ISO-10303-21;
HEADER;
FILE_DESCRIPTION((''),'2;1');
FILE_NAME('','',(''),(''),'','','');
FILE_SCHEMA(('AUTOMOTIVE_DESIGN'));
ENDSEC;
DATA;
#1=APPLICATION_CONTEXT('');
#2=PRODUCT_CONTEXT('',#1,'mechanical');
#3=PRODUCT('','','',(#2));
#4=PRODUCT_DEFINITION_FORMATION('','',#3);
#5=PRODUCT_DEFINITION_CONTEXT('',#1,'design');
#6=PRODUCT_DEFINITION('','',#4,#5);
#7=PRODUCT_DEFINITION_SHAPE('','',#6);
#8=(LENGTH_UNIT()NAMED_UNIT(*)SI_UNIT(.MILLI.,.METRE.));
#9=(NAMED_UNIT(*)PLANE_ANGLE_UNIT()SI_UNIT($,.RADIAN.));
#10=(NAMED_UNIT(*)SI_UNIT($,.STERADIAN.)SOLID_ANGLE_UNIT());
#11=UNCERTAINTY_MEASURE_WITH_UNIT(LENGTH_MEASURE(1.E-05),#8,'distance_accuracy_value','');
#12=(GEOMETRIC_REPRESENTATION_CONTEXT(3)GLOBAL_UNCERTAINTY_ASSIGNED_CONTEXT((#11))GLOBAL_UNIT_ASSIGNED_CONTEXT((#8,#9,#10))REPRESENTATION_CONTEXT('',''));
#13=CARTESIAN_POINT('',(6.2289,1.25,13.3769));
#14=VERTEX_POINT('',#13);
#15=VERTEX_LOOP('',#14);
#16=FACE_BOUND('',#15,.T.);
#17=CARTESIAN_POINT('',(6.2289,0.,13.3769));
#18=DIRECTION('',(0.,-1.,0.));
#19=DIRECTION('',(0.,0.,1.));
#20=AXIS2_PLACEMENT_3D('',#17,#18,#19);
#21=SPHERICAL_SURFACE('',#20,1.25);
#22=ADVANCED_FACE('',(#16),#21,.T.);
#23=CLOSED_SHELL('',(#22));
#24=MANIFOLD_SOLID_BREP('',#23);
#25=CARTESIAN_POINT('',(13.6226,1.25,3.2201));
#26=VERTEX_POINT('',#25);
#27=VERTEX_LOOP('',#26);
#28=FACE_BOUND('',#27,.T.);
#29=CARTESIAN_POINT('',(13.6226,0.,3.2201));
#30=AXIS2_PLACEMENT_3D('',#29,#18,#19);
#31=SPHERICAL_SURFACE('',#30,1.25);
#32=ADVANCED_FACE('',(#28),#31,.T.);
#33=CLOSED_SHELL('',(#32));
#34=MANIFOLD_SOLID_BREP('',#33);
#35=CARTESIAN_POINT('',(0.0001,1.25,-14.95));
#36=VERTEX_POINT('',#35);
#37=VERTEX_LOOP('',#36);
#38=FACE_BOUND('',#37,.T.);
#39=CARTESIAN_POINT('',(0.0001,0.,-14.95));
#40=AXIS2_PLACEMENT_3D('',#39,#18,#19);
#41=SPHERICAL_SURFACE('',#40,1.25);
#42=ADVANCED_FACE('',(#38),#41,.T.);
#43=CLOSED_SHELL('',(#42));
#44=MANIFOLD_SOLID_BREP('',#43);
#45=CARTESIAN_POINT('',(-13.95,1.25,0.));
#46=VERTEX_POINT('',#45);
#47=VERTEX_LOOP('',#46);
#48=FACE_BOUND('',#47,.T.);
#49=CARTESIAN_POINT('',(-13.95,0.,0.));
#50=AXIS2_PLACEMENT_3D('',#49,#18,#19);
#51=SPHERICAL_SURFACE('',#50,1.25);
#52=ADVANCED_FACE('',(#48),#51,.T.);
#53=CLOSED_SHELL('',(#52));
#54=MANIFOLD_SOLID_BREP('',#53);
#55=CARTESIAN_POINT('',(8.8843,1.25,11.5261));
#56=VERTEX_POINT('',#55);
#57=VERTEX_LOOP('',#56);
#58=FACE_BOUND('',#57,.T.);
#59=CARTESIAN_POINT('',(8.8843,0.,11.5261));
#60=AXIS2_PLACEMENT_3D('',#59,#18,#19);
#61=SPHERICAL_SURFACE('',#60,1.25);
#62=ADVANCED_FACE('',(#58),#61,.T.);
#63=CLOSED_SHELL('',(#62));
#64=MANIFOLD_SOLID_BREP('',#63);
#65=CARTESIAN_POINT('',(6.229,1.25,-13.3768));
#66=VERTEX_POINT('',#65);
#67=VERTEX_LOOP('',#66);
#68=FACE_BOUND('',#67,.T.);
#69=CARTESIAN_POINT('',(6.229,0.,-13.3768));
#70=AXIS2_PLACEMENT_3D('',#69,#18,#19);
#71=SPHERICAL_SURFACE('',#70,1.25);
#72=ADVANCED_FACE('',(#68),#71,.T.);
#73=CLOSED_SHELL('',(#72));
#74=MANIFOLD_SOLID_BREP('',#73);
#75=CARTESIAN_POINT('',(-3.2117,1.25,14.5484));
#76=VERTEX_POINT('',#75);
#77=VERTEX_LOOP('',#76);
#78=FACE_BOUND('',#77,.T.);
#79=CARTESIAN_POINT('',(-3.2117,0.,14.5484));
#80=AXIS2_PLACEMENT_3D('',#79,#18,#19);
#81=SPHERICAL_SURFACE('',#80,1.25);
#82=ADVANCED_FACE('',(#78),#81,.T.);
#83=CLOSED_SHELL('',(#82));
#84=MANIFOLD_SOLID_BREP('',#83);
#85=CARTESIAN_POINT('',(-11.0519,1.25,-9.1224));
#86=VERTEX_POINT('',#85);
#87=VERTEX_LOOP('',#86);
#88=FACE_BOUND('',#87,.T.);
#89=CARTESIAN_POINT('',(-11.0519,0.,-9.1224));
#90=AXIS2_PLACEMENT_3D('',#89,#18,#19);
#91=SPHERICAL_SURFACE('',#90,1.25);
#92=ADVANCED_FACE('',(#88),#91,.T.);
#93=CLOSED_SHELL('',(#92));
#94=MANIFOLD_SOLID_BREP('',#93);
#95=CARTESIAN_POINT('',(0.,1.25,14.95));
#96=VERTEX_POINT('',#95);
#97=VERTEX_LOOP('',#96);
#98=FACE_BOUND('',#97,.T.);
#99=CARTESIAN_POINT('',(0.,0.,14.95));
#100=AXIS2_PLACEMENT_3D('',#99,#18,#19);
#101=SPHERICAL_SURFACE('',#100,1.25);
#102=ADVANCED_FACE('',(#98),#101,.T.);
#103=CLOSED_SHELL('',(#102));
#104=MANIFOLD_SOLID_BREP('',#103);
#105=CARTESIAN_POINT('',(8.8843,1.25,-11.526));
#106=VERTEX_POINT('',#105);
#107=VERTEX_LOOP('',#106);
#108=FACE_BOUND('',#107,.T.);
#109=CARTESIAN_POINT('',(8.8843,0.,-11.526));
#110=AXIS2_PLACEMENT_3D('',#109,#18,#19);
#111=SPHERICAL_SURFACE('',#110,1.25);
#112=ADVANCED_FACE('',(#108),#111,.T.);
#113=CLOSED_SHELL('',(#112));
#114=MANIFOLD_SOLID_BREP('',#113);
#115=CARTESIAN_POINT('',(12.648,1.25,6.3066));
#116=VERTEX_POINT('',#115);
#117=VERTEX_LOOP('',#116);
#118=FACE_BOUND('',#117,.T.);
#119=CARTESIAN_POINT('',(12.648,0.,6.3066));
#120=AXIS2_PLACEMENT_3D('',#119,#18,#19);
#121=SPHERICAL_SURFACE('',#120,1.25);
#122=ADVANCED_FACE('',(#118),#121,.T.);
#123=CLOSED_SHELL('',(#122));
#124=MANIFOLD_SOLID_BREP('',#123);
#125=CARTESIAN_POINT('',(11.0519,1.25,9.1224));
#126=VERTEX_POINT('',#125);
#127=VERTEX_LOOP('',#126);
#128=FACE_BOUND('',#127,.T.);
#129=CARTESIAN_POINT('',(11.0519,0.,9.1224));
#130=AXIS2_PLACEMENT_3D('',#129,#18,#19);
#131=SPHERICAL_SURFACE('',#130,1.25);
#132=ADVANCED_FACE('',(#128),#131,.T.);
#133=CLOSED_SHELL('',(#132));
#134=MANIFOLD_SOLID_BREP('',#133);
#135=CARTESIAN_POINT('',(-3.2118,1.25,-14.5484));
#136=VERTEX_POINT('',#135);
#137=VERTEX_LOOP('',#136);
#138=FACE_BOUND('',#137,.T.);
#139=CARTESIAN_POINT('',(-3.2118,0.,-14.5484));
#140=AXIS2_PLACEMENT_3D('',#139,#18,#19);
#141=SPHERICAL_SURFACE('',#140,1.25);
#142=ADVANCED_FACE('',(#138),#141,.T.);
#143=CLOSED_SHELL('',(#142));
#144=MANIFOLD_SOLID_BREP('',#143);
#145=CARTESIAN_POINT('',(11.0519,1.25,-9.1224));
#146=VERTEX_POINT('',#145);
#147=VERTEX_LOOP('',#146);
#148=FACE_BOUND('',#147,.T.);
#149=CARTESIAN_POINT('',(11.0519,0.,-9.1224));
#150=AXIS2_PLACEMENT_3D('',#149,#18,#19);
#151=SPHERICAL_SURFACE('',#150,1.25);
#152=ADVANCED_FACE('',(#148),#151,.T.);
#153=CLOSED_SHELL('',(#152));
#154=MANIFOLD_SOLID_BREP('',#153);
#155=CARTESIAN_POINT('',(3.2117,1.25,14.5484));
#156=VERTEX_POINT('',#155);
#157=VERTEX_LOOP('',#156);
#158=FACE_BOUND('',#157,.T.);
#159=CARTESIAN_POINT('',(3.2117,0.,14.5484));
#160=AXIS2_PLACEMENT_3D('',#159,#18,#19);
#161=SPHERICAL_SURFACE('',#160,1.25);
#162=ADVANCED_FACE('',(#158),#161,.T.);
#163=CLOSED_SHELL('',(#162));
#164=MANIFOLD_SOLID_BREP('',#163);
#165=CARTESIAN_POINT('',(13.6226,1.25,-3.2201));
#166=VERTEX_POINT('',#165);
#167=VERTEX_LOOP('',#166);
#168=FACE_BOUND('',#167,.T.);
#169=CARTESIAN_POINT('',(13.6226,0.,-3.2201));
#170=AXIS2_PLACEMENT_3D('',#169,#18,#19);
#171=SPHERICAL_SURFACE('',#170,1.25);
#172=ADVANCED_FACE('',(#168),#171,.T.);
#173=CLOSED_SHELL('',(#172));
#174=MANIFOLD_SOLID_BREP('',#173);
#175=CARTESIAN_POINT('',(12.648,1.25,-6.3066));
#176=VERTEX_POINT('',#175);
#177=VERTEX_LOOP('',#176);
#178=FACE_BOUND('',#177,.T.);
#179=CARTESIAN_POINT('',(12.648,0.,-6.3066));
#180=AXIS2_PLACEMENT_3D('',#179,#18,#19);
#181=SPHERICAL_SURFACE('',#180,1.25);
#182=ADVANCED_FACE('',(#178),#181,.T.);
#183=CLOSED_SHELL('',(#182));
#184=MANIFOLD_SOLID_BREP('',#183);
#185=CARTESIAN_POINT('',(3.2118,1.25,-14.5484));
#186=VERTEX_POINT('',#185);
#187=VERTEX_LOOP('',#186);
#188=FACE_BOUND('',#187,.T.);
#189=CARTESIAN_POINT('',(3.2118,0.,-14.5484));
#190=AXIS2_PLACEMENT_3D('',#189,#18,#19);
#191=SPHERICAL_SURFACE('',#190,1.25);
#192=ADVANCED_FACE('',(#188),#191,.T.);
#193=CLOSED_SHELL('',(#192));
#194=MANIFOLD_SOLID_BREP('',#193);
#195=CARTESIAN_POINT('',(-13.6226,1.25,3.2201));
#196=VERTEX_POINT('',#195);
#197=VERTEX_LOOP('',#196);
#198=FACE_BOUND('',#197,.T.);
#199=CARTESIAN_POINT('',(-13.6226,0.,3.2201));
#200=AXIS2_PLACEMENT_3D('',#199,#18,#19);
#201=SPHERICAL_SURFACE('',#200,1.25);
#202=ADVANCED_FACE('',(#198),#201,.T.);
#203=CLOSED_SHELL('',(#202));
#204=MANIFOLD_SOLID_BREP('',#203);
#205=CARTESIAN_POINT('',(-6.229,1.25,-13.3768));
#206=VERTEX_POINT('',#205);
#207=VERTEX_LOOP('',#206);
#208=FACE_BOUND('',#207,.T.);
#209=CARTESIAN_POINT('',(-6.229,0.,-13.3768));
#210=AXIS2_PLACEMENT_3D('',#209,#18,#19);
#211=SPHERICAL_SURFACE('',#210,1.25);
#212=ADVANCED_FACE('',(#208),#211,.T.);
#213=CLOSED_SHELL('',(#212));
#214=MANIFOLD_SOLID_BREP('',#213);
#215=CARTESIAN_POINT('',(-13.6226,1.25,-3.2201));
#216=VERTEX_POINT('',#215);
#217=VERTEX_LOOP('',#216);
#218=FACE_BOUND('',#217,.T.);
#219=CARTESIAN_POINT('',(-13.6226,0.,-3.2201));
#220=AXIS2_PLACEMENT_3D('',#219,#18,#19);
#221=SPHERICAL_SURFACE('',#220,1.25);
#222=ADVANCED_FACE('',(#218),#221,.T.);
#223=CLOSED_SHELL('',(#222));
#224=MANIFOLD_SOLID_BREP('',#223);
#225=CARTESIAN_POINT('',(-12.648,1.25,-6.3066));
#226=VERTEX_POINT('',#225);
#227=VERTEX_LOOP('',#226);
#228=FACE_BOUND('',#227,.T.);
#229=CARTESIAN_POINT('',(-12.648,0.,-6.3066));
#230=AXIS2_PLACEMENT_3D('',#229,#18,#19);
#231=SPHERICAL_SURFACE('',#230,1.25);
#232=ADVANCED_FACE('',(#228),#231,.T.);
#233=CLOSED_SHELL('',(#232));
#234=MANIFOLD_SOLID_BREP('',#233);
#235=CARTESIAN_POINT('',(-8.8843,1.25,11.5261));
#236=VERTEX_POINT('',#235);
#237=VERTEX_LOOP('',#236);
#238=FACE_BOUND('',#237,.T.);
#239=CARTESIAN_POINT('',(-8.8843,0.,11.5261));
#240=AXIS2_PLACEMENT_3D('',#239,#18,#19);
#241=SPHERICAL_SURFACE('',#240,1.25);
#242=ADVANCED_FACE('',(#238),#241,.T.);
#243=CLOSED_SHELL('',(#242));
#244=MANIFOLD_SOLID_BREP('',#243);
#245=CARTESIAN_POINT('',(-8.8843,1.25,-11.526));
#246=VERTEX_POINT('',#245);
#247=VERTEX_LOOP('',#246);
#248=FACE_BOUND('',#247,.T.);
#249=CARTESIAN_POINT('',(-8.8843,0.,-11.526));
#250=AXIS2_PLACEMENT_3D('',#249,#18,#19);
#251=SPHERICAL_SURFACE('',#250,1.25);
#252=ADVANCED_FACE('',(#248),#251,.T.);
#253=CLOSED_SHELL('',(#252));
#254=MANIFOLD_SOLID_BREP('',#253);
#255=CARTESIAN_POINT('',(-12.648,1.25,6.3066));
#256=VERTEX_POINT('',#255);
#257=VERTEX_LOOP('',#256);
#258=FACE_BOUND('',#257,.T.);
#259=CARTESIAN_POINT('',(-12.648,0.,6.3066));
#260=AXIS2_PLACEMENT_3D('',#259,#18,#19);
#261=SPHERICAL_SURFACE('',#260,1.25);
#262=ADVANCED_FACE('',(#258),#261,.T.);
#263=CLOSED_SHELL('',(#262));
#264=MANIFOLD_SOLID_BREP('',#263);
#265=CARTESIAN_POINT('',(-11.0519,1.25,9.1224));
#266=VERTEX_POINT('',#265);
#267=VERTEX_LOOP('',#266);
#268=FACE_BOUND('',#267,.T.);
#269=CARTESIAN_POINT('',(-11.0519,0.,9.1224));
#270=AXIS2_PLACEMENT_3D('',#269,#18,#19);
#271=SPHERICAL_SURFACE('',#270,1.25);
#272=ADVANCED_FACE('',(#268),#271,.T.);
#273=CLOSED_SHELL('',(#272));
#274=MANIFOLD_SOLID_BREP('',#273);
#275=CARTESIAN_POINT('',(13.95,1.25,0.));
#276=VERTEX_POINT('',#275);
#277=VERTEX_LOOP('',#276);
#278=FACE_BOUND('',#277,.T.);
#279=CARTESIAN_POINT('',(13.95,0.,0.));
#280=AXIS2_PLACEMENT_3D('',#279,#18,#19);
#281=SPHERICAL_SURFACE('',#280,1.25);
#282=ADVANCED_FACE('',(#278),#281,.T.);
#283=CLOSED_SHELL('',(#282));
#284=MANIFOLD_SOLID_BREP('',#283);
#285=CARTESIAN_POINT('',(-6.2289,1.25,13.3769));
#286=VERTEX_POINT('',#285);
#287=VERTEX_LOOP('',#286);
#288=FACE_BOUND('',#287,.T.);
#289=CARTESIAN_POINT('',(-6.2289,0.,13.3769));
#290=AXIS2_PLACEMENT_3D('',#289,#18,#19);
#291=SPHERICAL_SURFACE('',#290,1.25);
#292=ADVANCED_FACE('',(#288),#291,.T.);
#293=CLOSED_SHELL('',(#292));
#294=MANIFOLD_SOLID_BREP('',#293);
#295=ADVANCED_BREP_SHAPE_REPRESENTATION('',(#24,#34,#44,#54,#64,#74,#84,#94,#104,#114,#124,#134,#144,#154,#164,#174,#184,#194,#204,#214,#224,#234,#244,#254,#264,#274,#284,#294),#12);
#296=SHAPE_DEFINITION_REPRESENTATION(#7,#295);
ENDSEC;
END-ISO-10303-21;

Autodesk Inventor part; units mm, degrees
ref_plane "YZ Plane" through (0, 0, 0) normal (1, 0, 0) x (0, 1, 0)
ref_plane "XZ Plane" through (0, 0, 0) normal (0, 1, 0) x (-1, 0, 0)
ref_plane "XY Plane" through (0, 0, 0) normal (0, 0, 1) x (1, 0, 0)
sketch "Sketch1" plane through (0, 0, 0) normal (1, 0, 0) x (0, 1, 0)
  line L0 (-1.25, 14.95) -> (1.25, 14.95)
  arc A0 (1.25, 14.95) -> (-1.25, 14.95) centre (0, 14.95) ccw
  point P0 (0, 0)
  point P1 (0, 0)
  point P2 (0, 16.2)
  dimension "d5" = 1.25
  dimension "d14" = 16.2
revolve "Revolution1" add sketch "Sketch1" angle 360 about axis through (0, -1.25, 14.95) along (0, 1, 0)
pattern_sketch "Sketch Driven Pattern2" of "Revolution1" from (0, 0, 14.95) copies at (-3.2117, 0, 14.5484) at (-6.2289, 0, 13.3769) at (-8.8843, 0, 11.5261) at (-11.0519, 0, 9.1224) at (-12.648, 0, 6.3066) at (-13.6226, 0, 3.2201) at (-13.95, 0, 0) at (-13.6226, 0, -3.2201) at (-12.648, 0, -6.3066) at (-11.0519, 0, -9.1224) at (-8.8843, 0, -11.526) at (-6.229, 0, -13.3768) at (-3.2118, 0, -14.5484) at (3.2118, 0, -14.5484) at (6.229, 0, -13.3768) at (8.8843, 0, -11.526) at (11.0519, 0, -9.1224) at (12.648, 0, -6.3066) at (13.6226, 0, -3.2201) at (13.95, 0, 0) at (13.6226, 0, 3.2201) at (12.648, 0, 6.3066) at (11.0519, 0, 9.1224) at (8.8843, 0, 11.5261) at (6.2289, 0, 13.3769) at (3.2117, 0, 14.5484) at (0.0001, 0, -14.95)
sketch "Sketch3" plane through (0, 0, 0) normal (0, 1, 0) x (-1, 0, 0)
  ellipse E0 centre (0, 0) end of major axis (0, 14.95) minor radius 13.95 construction
  circle A0 centre (0, 14.95) radius 1.25 construction
  line L0 (0, 14.95) -> (0, 0) construction
  line L1 (0, 0) -> (13.95, 0) construction
  circle A1 centre (0.0001, -14.95) radius 1.25 construction
  circle A2 centre (0, 14.95) radius 1.25 construction
  line L2 (0, 0) -> (-13.95, 0) construction
  point P0 (3.2117, 14.5484)
  point P1 (6.2289, 13.3769)
  point P2 (8.8843, 11.5261)
  point P3 (11.0519, 9.1224)
  point P4 (12.648, 6.3066)
  point P5 (13.6226, 3.2201)
  point P6 (3.2118, -14.5484)
  point P7 (6.229, -13.3768)
  point P8 (8.8843, -11.526)
  point P9 (11.0519, -9.1224)
  point P10 (12.648, -6.3066)
  point P11 (13.6226, -3.2201)
  point P12 (-3.2117, 14.5484)
  point P13 (-6.2289, 13.3769)
  point P14 (-8.8843, 11.5261)
  point P15 (-11.0519, 9.1224)
  point P16 (-12.648, 6.3066)
  point P17 (-13.6226, 3.2201)
  point P18 (-0.0001, -14.95)
  point P19 (-13.6226, -3.2201)
  point P20 (-12.648, -6.3066)
  point P21 (-11.0519, -9.1224)
  point P22 (-8.8843, -11.526)
  point P23 (-6.229, -13.3768)
  point P24 (-3.2118, -14.5484)
  point P25 (-0.0001, -14.95)
  dimension "d15" = 13.95
  dimension "d7" = 3.2367
  dimension "d8" = 3.2367
  dimension "d9" = 3.2367
  dimension "d10" = 3.2367
  dimension "d11" = 3.2367
  dimension "d12" = 3.2367
  dimension "d13" = 3.2367
equation "\"d8\" = d7"
equation "\"d9\" = d8"
equation "\"d10\" = d9"
equation "\"d11\" = d10"
equation "\"d12\" = d11"
equation "\"d13\" = d12"
properties part number "2.5mm_BALL_BEARINGS" material "Steel, O1, HT 58-60 Rc"
